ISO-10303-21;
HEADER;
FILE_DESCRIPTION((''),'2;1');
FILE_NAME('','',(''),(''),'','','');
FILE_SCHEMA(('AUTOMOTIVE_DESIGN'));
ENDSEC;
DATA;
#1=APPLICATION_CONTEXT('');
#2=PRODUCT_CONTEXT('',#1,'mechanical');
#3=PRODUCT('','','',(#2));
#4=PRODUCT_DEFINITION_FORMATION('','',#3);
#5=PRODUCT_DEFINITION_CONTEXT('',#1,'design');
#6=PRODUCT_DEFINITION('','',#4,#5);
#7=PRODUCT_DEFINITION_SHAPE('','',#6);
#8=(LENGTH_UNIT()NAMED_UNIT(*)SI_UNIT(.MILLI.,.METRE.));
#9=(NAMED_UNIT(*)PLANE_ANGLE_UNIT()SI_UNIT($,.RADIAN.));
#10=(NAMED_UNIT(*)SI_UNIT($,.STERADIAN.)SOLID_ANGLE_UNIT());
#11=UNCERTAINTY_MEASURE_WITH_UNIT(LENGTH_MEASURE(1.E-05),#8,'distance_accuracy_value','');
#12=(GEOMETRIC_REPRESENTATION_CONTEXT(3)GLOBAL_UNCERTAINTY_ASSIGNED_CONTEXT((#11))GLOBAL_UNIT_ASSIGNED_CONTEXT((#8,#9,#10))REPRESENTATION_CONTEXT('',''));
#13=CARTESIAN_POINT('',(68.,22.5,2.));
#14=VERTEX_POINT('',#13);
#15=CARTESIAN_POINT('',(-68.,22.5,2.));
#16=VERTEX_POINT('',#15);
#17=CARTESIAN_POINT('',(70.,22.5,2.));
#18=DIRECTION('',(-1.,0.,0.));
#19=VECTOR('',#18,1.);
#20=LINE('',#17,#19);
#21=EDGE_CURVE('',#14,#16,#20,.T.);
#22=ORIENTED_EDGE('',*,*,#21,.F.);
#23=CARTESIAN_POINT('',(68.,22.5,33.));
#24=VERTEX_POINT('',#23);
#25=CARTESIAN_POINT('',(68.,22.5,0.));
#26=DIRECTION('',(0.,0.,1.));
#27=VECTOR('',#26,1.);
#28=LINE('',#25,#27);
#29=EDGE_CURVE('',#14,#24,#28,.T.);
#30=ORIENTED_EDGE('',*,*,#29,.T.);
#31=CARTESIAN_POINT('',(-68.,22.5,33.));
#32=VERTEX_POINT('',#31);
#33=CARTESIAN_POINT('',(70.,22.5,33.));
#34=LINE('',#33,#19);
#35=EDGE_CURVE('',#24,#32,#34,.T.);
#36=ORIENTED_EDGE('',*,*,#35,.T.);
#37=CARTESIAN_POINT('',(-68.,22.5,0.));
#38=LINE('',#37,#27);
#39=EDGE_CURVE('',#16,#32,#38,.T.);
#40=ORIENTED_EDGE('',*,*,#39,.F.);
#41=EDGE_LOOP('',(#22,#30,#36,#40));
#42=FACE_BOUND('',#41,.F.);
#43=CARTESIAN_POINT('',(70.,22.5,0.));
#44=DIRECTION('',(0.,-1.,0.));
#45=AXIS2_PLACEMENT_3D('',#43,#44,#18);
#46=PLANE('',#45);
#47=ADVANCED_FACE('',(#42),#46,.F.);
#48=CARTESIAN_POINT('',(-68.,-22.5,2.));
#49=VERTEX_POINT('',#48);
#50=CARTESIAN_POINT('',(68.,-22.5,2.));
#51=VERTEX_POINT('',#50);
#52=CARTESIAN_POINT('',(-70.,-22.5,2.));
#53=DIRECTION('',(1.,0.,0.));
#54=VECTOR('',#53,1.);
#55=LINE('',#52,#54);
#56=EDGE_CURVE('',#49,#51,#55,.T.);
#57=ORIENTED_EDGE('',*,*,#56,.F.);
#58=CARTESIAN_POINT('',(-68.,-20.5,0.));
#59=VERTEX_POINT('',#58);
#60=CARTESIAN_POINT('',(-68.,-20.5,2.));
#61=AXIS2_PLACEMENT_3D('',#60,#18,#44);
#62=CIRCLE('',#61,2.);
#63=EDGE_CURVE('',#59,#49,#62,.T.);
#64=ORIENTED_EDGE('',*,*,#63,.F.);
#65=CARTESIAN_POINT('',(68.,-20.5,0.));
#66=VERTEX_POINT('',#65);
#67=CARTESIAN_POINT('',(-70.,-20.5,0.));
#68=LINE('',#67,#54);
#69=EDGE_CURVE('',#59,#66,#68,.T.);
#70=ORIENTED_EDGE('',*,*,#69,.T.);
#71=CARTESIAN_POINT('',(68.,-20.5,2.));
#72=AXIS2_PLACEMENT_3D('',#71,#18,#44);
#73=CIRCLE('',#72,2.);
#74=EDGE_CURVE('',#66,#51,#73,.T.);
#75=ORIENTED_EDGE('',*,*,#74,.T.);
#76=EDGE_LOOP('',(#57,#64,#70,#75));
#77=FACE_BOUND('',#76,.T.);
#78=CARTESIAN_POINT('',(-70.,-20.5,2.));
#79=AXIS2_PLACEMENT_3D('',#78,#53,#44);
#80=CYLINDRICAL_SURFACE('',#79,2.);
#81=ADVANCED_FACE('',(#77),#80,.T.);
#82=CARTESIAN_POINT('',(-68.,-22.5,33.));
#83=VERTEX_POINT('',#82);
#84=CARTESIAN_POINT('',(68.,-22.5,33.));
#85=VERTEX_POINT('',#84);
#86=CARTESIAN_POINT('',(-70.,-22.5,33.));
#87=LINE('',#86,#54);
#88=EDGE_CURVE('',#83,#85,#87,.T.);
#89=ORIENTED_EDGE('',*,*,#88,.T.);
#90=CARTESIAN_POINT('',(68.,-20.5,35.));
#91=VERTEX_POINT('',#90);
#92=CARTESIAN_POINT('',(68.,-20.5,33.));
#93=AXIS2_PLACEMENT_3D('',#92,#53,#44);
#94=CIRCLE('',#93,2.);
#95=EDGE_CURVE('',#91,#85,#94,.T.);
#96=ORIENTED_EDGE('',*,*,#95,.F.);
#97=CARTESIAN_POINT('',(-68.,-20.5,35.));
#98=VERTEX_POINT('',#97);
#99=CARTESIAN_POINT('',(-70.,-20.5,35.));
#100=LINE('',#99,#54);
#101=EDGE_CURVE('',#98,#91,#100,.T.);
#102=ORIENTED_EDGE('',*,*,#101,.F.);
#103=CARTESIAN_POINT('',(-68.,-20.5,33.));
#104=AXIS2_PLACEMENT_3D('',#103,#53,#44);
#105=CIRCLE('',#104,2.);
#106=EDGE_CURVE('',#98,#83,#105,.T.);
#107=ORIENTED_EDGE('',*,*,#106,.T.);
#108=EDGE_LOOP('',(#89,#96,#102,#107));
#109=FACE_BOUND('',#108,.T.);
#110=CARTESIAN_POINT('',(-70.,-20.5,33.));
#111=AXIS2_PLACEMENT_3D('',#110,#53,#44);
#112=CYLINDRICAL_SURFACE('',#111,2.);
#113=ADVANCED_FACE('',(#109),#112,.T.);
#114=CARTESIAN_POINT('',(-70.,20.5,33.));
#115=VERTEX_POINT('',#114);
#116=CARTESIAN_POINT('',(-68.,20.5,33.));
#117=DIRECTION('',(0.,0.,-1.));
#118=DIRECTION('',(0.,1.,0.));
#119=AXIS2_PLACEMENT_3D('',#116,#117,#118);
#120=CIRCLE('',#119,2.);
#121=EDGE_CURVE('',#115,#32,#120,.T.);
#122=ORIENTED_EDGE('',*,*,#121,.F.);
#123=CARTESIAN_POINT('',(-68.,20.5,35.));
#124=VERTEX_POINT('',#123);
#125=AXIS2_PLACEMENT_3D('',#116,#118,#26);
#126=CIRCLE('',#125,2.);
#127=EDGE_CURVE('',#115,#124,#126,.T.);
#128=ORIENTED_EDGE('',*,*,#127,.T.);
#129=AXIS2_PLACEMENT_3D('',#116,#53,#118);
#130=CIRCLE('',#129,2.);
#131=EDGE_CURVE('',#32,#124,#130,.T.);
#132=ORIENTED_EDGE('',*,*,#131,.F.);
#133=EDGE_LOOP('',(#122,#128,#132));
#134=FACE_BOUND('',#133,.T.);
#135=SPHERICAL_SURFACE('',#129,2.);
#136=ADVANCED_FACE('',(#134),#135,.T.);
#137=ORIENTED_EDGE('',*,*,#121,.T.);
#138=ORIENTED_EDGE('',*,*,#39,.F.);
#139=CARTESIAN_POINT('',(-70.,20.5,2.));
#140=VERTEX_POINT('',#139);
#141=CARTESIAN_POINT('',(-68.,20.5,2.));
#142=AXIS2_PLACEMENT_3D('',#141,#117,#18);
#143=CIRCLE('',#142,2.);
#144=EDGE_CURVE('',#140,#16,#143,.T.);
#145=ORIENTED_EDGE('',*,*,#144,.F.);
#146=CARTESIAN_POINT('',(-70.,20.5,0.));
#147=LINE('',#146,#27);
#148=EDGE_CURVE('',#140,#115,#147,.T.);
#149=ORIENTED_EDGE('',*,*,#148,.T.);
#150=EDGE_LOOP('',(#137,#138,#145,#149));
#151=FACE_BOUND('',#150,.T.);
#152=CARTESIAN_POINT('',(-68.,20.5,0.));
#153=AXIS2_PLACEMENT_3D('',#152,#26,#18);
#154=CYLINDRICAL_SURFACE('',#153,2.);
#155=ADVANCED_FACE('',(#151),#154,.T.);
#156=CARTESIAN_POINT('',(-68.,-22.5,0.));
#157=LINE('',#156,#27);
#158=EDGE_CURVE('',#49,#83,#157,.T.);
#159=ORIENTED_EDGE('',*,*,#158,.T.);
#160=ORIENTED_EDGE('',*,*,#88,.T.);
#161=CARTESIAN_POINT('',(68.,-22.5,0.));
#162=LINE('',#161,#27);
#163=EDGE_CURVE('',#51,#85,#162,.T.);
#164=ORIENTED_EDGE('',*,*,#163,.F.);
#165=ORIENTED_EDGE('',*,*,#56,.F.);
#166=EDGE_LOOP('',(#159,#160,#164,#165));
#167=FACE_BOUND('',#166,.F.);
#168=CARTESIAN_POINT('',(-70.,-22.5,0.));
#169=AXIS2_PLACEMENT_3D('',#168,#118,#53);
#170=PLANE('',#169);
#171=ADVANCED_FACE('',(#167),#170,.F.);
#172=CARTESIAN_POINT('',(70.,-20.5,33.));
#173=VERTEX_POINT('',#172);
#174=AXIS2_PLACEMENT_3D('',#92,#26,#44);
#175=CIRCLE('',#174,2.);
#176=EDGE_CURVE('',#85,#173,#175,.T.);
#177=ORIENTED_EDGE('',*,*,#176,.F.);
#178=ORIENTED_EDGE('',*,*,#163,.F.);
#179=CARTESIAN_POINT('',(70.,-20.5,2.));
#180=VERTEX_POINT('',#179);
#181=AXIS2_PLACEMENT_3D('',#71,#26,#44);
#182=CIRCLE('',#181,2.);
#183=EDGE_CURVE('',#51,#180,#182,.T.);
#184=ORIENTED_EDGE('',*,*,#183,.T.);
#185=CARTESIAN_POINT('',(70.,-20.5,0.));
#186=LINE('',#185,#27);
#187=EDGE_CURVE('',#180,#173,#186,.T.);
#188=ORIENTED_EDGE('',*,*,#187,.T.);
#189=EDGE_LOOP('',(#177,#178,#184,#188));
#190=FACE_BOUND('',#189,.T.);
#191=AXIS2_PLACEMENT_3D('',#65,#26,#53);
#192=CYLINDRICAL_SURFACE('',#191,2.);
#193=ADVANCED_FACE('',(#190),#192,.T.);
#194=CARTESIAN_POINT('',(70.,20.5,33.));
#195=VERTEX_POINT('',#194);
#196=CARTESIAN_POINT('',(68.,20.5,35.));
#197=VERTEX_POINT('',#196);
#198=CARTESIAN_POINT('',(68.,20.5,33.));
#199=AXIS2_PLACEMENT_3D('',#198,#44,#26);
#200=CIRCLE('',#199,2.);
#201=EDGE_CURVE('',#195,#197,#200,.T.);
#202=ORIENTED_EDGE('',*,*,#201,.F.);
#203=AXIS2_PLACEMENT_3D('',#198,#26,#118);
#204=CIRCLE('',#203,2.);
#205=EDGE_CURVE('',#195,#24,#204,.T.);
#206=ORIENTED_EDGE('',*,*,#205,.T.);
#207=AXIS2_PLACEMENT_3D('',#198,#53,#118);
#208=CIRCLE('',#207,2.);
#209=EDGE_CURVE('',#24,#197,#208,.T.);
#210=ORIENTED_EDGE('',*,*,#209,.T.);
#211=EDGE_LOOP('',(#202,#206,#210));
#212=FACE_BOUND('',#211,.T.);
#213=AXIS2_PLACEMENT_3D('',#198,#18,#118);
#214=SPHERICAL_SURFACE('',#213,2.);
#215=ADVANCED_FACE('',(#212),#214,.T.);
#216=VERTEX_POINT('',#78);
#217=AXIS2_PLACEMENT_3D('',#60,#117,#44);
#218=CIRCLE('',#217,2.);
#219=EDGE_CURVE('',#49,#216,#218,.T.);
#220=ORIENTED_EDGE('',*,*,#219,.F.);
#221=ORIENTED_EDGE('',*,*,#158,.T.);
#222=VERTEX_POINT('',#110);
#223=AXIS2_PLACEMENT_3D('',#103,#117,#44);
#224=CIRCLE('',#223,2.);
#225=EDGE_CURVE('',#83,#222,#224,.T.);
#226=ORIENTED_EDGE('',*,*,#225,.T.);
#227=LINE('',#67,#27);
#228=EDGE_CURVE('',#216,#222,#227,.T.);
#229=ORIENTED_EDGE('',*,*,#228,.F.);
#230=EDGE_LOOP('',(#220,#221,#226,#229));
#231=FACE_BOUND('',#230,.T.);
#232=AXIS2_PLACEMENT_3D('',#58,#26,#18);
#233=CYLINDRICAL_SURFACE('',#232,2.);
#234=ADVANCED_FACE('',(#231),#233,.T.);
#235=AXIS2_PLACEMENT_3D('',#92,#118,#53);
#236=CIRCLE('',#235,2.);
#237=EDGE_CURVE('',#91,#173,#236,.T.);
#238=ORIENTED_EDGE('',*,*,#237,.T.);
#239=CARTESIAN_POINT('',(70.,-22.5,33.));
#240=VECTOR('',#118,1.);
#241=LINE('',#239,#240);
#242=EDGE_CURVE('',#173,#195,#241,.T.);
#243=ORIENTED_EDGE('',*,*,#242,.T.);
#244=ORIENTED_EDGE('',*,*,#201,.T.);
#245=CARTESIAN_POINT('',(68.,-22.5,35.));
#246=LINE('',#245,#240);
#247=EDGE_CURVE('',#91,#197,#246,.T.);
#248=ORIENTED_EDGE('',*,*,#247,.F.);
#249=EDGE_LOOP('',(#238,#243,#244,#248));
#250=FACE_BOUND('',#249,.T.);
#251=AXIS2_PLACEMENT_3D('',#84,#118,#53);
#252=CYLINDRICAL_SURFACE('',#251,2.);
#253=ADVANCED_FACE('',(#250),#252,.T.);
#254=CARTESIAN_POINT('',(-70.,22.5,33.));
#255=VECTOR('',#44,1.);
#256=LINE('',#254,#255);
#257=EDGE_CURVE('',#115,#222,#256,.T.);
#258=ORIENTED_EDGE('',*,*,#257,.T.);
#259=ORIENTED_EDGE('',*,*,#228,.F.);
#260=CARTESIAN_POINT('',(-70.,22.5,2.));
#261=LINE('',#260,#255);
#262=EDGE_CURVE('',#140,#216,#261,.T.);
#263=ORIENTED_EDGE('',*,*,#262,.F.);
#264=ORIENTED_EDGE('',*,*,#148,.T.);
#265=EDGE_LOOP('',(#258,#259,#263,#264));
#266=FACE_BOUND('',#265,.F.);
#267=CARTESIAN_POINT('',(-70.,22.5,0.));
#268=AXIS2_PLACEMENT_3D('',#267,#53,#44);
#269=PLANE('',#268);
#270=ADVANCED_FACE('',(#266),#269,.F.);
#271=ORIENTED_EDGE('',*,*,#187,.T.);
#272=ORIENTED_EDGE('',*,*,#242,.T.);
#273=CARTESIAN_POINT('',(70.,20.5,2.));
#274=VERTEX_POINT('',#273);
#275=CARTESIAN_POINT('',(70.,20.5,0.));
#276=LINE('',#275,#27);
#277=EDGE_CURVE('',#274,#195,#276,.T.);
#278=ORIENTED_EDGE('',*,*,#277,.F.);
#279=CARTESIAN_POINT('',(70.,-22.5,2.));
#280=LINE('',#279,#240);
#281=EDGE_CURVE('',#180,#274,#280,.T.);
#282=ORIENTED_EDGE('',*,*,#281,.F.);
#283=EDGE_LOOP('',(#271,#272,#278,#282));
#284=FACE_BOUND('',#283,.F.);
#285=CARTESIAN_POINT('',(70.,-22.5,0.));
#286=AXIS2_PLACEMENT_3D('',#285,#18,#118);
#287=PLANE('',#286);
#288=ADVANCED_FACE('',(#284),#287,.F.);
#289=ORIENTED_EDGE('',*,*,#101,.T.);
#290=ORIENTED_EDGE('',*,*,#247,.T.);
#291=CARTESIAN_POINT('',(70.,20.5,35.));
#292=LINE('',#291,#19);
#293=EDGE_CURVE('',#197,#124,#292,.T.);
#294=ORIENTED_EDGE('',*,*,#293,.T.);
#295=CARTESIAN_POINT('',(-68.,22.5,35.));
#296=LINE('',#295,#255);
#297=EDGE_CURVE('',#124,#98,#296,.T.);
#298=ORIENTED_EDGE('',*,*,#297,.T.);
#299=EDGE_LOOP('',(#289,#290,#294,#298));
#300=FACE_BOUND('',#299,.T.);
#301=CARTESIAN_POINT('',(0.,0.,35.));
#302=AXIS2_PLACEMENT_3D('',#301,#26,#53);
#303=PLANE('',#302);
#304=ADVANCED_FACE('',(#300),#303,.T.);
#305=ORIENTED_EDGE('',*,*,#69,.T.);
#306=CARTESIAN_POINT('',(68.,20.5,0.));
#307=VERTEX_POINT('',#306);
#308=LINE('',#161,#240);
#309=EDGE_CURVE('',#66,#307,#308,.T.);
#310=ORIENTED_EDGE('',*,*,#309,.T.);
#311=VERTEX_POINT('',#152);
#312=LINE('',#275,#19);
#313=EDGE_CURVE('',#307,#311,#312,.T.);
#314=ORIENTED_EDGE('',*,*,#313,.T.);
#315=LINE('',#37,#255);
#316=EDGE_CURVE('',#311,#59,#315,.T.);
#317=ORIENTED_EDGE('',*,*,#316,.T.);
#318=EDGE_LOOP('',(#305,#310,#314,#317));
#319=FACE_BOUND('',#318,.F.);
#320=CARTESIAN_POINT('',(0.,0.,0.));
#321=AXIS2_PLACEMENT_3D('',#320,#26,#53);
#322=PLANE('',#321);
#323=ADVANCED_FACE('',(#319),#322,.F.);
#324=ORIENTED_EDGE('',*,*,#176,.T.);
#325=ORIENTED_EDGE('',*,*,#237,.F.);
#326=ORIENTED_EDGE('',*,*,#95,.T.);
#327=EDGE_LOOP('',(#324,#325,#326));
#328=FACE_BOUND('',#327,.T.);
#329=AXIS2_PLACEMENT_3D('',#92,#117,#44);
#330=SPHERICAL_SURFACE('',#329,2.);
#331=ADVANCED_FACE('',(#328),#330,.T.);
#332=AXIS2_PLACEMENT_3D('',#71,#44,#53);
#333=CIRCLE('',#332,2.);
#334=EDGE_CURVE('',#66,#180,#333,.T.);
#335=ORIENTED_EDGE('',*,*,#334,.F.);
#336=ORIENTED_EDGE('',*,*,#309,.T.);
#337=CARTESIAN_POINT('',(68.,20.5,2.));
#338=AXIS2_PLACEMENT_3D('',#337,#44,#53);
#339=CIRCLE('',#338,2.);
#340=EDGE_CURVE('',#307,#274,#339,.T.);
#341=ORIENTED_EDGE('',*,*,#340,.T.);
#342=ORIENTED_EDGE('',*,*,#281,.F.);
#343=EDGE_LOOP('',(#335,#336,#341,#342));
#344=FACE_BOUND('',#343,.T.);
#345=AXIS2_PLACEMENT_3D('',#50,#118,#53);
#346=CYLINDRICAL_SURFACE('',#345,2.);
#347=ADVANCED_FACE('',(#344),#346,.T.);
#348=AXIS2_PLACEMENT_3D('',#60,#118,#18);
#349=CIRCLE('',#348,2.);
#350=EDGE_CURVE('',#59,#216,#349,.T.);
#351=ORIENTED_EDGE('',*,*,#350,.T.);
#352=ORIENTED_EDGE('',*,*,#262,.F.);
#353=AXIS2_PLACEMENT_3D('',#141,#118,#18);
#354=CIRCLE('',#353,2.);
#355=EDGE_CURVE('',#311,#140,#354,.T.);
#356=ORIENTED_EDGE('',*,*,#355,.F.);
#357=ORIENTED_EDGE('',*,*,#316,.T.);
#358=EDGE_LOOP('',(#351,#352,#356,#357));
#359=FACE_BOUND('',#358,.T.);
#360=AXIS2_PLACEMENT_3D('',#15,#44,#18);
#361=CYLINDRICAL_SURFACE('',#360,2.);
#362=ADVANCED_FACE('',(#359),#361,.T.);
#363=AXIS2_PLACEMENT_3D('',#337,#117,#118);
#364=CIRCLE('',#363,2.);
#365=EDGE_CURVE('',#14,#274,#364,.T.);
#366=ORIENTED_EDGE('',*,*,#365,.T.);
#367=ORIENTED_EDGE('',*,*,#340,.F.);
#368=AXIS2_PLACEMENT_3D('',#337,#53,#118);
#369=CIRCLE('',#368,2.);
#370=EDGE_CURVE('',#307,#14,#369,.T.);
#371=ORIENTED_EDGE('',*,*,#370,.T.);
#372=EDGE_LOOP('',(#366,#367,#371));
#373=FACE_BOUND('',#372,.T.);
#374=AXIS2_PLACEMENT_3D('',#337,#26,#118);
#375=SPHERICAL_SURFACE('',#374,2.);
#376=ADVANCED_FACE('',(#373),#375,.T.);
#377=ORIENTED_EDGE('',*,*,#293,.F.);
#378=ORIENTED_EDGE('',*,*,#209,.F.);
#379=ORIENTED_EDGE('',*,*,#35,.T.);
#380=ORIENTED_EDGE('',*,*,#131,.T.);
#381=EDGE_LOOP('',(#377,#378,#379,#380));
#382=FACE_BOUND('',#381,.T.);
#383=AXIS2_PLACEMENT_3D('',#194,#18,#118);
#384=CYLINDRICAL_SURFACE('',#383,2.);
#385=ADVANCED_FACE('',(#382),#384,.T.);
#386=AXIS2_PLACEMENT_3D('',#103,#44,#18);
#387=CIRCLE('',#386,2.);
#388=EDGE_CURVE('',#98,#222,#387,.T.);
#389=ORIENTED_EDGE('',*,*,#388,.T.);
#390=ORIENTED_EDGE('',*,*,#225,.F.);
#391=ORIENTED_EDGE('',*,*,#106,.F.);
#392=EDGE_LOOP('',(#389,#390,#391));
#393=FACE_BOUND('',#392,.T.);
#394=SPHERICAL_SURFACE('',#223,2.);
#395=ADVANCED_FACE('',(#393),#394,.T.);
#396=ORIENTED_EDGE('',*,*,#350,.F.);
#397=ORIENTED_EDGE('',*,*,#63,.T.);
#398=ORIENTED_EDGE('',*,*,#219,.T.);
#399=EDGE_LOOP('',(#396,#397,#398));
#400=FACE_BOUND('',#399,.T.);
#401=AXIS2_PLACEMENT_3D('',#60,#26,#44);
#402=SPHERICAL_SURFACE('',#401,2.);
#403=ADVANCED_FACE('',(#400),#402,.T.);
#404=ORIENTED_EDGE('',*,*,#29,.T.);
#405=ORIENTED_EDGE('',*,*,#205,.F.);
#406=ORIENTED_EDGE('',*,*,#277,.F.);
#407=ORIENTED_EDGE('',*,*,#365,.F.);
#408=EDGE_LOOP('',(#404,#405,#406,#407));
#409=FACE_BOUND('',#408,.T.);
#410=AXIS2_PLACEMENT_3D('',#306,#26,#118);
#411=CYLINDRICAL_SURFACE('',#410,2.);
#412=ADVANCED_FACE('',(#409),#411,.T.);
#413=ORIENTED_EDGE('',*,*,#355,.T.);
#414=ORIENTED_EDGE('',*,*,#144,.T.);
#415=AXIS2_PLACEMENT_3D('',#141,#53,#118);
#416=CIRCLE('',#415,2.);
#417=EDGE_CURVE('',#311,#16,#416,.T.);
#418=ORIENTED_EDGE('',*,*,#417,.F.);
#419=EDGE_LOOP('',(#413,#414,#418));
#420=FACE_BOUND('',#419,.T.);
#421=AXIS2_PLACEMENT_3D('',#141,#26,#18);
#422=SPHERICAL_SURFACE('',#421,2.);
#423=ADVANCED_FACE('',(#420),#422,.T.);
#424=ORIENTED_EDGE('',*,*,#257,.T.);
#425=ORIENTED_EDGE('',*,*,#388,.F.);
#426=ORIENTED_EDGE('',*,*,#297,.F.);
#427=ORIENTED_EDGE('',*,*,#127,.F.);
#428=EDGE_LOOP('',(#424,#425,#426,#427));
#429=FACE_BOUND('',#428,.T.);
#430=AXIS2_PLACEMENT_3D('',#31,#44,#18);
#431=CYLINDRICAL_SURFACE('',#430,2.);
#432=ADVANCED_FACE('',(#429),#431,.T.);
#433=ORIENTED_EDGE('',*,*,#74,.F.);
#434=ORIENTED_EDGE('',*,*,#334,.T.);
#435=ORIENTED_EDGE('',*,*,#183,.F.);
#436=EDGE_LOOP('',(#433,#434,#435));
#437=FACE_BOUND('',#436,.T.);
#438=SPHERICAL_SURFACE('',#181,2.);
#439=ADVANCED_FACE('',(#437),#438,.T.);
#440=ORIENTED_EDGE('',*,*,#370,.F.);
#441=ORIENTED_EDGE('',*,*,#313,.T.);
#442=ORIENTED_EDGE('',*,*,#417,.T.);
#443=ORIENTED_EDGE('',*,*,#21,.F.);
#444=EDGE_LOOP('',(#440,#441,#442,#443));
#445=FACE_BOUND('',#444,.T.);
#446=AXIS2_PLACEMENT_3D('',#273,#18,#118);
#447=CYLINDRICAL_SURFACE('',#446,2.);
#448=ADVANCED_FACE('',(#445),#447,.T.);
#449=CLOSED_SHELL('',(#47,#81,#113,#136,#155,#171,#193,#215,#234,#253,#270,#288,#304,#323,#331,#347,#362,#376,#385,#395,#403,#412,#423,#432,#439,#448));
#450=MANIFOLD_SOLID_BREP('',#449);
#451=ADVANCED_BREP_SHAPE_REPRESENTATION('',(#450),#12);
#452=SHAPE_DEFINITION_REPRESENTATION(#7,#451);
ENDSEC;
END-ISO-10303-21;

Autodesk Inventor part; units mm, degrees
ref_plane "YZ Plane" through (0, 0, 0) normal (1, 0, 0) x (0, 1, 0)
ref_plane "XZ Plane" through (0, 0, 0) normal (0, 1, 0) x (-1, 0, 0)
ref_plane "XY Plane" through (0, 0, 0) normal (0, 0, 1) x (1, 0, 0)
sketch "スケッチ1" plane through (0, 0, 0) normal (0, 0, 1) x (1, 0, 0)
  line L0 (-70, -22.5) -> (70, -22.5)
  line L1 (70, -22.5) -> (70, 22.5)
  line L2 (70, 22.5) -> (-70, 22.5)
  line L3 (-70, 22.5) -> (-70, -22.5)
  line L4 (-70, -22.5) -> (70, 22.5) construction
  line L5 (70, -22.5) -> (-70, 22.5) construction
  point P0 (0, 0)
  dimension "d0" = 140
  dimension "d1" = 45
extrude "押し出し1" add sketch "スケッチ1" along normal blind 35
fillet "フィレット1" radius 2 1 edges at (0, 22.5, 35)
fillet "フィレット1" radius 2 12 edges at (-70, -22.5, 17.5) (70, -22.5, 17.5) (0, -22.5, 0) (0, -22.5, 35) (-70, 22.5, 17.5) (-70, 0, 0) (-70, 0, 35) (70, 22.5, 17.5) (0, 22.5, 0) (0, 22.5, 35) (70, 0, 0) (70, 0, 35)
properties part number "Fullymax_6s" material "ABS プラスチック"
